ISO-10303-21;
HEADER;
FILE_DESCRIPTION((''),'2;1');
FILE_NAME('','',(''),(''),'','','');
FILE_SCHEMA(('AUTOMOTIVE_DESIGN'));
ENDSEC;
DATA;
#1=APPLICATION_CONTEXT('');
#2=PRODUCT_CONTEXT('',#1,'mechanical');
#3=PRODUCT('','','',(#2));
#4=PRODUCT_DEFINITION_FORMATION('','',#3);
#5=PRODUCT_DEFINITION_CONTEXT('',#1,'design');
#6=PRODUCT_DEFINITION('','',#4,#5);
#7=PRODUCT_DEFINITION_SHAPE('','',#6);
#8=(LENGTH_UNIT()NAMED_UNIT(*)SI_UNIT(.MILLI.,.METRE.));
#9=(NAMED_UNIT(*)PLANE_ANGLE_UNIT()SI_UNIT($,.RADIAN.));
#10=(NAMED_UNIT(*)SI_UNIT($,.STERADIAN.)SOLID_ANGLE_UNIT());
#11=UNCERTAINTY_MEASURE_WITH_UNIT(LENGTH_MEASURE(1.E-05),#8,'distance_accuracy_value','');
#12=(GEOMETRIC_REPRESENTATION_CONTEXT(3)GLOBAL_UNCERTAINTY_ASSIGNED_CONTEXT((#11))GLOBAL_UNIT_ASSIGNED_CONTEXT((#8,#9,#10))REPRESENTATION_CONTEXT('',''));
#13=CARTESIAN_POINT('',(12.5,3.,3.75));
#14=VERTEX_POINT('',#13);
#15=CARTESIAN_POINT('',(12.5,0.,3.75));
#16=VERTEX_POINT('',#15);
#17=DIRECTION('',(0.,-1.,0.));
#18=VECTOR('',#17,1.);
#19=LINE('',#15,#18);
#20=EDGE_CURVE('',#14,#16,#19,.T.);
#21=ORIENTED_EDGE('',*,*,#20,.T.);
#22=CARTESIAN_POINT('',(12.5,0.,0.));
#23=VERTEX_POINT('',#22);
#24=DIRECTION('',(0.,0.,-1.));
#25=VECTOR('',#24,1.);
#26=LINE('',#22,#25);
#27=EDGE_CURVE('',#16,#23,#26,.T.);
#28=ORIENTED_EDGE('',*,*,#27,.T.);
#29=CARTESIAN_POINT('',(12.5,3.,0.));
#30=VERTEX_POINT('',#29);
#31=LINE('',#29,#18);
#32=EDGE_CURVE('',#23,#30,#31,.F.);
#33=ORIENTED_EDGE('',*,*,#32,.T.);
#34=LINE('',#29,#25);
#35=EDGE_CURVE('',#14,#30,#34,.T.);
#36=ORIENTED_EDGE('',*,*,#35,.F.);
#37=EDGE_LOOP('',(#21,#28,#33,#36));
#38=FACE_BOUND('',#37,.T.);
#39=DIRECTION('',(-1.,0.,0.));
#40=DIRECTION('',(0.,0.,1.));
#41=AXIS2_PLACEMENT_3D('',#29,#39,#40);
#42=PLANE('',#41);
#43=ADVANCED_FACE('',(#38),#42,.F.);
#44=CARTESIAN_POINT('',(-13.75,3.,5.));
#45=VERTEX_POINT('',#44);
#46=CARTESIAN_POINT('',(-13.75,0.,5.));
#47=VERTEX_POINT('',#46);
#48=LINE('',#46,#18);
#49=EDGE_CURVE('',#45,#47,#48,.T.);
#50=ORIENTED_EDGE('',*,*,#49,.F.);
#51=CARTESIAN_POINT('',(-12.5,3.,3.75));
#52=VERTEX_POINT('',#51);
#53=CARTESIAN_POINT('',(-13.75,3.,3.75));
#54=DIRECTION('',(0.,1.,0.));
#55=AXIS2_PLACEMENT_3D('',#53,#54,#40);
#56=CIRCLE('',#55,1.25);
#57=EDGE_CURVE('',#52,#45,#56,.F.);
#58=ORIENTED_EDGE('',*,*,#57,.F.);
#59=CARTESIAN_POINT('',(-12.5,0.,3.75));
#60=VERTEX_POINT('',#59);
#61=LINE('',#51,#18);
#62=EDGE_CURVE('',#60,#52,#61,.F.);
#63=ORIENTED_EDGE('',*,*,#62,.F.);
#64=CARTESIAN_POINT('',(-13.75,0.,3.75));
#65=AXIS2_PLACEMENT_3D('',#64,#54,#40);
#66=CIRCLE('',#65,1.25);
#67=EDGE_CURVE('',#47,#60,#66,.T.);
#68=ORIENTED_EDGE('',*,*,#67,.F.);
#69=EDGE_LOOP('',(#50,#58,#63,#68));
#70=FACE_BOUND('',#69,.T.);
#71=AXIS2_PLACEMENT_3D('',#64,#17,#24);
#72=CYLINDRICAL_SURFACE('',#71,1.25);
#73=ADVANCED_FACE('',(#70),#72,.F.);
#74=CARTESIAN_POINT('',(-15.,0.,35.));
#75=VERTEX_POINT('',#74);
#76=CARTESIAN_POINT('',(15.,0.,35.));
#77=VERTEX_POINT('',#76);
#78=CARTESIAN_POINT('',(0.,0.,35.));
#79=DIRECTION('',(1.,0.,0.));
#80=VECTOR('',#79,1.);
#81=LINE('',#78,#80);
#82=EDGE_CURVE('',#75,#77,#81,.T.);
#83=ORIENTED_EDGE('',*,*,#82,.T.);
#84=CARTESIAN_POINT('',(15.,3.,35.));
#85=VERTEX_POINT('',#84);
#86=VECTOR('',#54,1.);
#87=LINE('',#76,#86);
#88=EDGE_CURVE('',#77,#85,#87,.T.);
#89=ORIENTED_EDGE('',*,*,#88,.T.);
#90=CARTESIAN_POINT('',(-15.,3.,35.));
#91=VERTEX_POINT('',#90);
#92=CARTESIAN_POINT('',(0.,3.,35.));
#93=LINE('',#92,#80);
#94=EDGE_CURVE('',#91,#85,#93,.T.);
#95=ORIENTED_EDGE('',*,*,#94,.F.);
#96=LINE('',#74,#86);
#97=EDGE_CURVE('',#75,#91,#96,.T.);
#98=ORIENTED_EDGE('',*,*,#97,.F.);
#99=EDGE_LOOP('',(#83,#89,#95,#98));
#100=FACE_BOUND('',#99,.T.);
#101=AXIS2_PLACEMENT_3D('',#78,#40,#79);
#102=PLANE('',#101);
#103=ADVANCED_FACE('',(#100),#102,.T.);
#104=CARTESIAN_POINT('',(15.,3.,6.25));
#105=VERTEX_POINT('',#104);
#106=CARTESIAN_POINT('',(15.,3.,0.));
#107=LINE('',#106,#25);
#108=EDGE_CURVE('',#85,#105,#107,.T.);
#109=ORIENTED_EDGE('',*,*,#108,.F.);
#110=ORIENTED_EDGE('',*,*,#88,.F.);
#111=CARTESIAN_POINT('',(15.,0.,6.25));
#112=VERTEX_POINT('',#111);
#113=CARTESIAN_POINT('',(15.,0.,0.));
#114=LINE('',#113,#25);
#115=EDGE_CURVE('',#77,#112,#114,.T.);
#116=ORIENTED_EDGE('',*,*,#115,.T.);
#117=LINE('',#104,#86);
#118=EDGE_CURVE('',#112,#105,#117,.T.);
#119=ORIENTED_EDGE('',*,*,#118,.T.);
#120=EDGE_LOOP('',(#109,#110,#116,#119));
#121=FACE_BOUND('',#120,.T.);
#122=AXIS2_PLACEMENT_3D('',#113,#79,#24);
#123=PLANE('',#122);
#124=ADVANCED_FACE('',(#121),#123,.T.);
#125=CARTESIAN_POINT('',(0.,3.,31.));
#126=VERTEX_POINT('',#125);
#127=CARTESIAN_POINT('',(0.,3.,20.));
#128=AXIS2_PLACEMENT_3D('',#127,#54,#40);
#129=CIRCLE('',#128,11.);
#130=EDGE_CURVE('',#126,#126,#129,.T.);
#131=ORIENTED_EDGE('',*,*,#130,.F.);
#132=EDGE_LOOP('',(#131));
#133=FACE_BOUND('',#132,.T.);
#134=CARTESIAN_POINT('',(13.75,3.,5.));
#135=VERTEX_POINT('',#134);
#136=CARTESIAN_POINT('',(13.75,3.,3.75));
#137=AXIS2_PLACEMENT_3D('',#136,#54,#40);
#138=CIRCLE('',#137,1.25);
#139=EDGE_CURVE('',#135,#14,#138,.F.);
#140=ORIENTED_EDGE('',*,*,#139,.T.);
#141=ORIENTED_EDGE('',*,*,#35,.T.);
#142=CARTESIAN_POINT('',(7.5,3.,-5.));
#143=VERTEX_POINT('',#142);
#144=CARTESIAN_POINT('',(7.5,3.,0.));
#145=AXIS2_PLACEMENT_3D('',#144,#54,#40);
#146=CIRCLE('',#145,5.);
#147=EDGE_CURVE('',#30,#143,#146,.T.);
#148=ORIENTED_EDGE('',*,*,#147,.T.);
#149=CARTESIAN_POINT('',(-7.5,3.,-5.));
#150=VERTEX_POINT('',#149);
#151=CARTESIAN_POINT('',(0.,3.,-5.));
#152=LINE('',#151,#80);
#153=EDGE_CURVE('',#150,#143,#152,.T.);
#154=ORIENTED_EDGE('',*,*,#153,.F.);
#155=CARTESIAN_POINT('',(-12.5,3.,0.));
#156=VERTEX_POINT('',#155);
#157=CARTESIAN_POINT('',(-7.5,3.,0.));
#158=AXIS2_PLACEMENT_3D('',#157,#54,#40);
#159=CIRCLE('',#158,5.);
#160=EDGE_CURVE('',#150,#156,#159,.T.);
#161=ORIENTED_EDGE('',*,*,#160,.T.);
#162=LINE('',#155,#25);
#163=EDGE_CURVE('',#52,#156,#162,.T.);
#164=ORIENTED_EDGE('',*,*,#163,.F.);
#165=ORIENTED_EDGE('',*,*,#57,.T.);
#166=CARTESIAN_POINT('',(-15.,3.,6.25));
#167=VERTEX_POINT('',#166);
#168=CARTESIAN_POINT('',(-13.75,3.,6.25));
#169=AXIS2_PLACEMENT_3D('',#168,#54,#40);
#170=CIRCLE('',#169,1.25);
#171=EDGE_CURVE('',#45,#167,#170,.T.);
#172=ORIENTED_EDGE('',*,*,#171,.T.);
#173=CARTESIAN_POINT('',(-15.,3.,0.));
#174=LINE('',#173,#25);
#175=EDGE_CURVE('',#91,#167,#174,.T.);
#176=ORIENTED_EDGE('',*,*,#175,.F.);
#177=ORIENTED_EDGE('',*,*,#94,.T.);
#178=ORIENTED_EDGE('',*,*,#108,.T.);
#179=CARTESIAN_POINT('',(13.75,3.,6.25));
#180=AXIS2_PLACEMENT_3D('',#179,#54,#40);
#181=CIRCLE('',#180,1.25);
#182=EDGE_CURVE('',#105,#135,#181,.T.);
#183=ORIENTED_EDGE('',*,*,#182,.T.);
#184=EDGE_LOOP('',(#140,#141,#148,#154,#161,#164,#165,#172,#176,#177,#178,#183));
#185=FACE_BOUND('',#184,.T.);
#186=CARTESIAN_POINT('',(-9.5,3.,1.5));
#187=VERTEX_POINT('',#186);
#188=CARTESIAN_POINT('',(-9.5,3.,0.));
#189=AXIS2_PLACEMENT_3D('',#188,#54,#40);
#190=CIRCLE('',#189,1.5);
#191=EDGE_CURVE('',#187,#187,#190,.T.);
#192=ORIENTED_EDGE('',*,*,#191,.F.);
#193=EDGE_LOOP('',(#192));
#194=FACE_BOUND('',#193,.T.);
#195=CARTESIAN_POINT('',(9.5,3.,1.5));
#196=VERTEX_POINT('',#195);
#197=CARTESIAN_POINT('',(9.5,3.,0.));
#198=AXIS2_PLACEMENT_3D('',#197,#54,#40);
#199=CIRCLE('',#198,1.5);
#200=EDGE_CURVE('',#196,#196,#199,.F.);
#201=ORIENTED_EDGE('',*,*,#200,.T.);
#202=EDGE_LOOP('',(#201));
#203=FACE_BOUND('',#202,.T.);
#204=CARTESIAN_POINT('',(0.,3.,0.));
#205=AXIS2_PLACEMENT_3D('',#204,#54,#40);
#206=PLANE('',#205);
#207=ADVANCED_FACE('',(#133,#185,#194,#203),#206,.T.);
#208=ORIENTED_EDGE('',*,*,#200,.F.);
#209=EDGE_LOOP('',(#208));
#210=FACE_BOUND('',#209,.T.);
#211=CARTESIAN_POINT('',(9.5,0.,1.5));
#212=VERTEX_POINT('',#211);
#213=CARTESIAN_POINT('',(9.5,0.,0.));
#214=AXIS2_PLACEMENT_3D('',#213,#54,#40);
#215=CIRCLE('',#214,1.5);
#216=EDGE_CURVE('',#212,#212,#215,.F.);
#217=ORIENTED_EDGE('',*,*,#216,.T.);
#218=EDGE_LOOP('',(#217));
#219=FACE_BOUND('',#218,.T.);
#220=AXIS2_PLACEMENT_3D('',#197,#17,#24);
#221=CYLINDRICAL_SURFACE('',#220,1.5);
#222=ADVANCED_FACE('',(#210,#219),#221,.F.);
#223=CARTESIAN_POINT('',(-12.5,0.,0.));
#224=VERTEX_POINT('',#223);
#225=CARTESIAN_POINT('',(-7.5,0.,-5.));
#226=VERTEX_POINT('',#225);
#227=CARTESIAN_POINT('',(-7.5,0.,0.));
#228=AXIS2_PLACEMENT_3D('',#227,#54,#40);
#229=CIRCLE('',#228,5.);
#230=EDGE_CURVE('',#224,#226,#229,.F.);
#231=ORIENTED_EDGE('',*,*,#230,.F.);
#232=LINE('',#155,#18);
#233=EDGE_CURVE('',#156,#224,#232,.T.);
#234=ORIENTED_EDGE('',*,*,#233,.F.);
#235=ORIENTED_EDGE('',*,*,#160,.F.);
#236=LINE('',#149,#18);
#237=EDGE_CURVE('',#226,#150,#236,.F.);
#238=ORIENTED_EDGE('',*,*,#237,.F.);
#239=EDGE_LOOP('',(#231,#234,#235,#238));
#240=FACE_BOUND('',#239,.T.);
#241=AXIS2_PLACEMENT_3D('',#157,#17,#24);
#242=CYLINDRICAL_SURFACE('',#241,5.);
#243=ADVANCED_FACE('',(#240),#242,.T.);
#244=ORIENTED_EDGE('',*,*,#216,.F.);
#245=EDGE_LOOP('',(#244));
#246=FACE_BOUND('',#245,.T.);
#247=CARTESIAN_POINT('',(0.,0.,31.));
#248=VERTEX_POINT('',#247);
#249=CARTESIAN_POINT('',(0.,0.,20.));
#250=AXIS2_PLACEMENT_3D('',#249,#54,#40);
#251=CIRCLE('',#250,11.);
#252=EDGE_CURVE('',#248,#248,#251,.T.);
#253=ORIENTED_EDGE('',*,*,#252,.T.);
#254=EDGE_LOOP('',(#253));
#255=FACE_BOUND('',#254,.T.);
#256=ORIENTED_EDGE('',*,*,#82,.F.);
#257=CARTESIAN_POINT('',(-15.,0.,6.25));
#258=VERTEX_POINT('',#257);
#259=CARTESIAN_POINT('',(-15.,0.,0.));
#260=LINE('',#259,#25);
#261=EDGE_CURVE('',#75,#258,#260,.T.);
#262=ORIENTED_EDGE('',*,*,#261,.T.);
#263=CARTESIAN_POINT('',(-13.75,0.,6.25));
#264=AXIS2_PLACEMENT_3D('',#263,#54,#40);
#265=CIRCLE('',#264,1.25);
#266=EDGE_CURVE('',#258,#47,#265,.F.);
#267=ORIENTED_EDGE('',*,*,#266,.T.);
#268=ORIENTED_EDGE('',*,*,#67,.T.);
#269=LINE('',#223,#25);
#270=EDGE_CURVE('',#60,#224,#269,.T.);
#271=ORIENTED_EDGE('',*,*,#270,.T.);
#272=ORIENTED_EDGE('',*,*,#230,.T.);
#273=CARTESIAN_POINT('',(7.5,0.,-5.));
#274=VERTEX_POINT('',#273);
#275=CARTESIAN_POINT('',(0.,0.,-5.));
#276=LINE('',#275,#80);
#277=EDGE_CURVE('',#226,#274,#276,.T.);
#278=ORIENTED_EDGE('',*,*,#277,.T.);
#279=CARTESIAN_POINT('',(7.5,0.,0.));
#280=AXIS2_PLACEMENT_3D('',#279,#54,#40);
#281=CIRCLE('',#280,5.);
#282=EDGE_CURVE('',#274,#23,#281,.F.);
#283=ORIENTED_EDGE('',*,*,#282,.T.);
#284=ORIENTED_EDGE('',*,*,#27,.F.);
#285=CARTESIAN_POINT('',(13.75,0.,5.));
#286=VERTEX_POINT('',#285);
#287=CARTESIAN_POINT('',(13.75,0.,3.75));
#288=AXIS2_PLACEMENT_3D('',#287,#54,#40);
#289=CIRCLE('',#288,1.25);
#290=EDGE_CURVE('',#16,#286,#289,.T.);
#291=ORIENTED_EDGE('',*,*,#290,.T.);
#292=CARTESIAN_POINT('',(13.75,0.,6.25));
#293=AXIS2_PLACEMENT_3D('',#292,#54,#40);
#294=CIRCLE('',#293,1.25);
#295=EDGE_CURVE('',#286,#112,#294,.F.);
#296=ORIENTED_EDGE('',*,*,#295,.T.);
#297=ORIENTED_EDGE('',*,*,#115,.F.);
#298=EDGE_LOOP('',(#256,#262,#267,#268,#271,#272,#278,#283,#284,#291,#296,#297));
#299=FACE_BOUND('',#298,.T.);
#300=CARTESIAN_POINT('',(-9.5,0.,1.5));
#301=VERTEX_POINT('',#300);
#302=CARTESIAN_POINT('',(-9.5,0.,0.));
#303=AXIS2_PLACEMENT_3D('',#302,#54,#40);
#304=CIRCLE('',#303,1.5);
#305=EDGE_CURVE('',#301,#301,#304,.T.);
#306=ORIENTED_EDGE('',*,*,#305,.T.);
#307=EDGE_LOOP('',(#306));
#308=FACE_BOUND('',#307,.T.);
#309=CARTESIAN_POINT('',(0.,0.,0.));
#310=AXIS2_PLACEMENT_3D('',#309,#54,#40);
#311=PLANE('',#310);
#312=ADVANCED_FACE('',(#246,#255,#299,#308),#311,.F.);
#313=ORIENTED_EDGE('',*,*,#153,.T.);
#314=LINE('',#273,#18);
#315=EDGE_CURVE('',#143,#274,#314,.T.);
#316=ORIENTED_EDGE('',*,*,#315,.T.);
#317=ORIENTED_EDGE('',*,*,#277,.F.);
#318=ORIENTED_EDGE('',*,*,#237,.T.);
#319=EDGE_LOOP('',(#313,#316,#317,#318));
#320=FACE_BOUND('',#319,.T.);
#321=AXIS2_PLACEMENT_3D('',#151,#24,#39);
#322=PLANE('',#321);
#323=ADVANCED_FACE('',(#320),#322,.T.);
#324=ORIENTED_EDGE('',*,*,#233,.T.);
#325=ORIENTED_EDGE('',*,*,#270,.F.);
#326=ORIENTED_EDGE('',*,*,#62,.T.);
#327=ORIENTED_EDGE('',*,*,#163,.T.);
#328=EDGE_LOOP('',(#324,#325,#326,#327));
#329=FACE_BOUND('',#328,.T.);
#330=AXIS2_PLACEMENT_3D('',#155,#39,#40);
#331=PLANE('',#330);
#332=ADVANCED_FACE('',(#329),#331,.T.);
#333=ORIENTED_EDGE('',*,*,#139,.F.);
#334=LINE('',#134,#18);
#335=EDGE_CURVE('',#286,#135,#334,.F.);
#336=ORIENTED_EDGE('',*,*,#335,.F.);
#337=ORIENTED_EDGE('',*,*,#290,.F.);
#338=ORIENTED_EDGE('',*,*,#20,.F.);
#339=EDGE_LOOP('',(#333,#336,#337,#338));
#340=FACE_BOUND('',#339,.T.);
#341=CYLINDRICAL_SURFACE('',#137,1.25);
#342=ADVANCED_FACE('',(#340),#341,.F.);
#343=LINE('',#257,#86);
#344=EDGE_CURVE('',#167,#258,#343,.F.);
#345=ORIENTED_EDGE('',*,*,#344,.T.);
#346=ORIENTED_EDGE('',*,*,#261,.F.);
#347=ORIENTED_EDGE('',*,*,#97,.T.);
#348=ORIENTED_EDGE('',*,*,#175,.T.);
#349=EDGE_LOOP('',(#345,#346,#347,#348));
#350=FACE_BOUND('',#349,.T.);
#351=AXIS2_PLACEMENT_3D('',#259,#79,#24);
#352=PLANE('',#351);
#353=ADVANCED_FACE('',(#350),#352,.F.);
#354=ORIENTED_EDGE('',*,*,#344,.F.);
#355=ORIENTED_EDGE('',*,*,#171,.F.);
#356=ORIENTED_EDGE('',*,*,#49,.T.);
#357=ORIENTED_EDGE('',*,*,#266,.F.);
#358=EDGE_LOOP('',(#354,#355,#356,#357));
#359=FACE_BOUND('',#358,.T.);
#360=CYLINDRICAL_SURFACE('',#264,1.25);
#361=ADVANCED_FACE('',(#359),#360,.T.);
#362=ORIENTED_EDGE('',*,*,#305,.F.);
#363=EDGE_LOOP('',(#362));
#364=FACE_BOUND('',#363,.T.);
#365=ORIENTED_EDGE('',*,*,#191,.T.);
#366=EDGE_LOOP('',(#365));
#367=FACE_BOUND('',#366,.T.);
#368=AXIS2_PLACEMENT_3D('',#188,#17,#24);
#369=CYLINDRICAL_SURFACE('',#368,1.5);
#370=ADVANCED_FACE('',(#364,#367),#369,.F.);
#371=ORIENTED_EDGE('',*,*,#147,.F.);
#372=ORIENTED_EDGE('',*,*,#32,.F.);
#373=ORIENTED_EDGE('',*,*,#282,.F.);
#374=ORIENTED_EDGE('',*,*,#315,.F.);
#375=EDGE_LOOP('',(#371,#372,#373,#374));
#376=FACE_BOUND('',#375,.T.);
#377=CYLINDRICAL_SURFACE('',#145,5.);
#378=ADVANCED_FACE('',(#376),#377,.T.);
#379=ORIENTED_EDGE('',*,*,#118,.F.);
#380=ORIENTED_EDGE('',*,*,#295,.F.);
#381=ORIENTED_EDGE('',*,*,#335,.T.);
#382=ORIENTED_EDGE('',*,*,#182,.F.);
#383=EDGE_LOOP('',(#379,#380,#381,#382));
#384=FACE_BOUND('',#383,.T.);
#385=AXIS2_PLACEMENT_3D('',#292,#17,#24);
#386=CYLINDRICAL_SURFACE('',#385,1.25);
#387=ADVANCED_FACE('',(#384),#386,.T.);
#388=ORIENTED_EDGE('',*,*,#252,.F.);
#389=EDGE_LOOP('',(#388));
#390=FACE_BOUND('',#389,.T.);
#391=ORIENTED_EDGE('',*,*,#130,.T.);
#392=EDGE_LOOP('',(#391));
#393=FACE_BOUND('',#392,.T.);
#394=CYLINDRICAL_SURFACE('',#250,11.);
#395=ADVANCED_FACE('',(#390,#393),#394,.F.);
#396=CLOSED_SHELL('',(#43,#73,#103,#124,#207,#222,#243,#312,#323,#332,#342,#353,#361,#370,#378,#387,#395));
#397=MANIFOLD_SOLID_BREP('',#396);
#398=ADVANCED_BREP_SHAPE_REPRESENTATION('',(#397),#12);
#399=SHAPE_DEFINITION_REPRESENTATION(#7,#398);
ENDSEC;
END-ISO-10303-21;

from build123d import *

# Parameters (mm, degrees)
SKETCH_1_W       = 25
SKETCH_1_H       = 10
SKETCH_1_R       = 1.5
EXTRUDE_1_DEPTH  = 3
SKETCH_3_W       = 30
SKETCH_3_H       = 30
SKETCH_3_R       = 11
EXTRUDE_2_DEPTH  = 3
FILLET_START     = -1
FILLET_1_DEPTH   = 5
FILLET_1_2_DEPTH = 3
FILLET_2_R       = 5


with BuildPart() as part:
    # 草图1 → 凸台-拉伸1 (new body)
    with BuildSketch(Plane(origin=(0, 0, 0), x_dir=(1, 0, 0), z_dir=(0, 1, 0))):
        Rectangle(SKETCH_1_W, SKETCH_1_H)
        with Locations(Location((-9.5, 0, 0), (0, 0, 270))):
            Circle(SKETCH_1_R, mode=Mode.SUBTRACT)
        with Locations(Location((9.5, 0, 0), (0, 0, 270))):
            Circle(SKETCH_1_R, mode=Mode.SUBTRACT)
    extrude(amount=EXTRUDE_1_DEPTH)

    # 草图3 → 凸台-拉伸2 (add)
    with BuildSketch(Plane(origin=(0, 3, 0), x_dir=(1, 0, 0), z_dir=(0, 1, 0))):
        with Locations((0, -20)):
            Rectangle(SKETCH_3_W, SKETCH_3_H)
        with Locations(Location((0, -20, 0), (0, 0, 270))):
            Circle(SKETCH_3_R, mode=Mode.SUBTRACT)
    extrude(amount=-EXTRUDE_2_DEPTH)

    # 圆角1: read off the stored shape, not the designer's step
    # 圆角1 outline → 圆角1 (cut)
    with BuildSketch(Plane(origin=(0, 0, 0), x_dir=(1, 0, 0), z_dir=(0, 1, 0)).offset(FILLET_START)):
        with BuildLine():
            ThreePointArc((-15, -6.25), (-14.633883476, -5.366116524), (-13.75, -5))
            Line((-13.75, -5), (-15, -5))
            Line((-15, -5), (-15, -6.25))
        make_face()
        with BuildLine():
            Line((15, -5), (13.75, -5))
            ThreePointArc((13.75, -5), (14.633883476, -5.366116524), (15, -6.25))
            Line((15, -6.25), (15, -5))
        make_face()
    extrude(amount=FILLET_1_DEPTH, mode=Mode.SUBTRACT)

    # Fillet 1 2 outline → Fillet 1 2 (add)
    with BuildSketch(Plane(origin=(0, 0, 0), x_dir=(1, 0, 0), z_dir=(0, 1, 0))):
        with BuildLine():
            Line((-12.5, -5), (-12.5, -3.75))
            ThreePointArc((-12.5, -3.75), (-12.866116524, -4.633883476), (-13.75, -5))
            Line((-13.75, -5), (-12.5, -5))
        make_face()
        with BuildLine():
            ThreePointArc((13.75, -5), (12.866116524, -4.633883476), (12.5, -3.75))
            Line((12.5, -3.75), (12.5, -5))
            Line((12.5, -5), (13.75, -5))
        make_face()
    extrude(amount=FILLET_1_2_DEPTH)

    # 圆角2
    fillet_2_edges = [part.edges().sort_by_distance(p)[0] for p in [
        (-12.5, 1.5, -5),
        (12.5, 1.5, -5),
    ]]
    fillet(fillet_2_edges, radius=FILLET_2_R)


solid = part.part
